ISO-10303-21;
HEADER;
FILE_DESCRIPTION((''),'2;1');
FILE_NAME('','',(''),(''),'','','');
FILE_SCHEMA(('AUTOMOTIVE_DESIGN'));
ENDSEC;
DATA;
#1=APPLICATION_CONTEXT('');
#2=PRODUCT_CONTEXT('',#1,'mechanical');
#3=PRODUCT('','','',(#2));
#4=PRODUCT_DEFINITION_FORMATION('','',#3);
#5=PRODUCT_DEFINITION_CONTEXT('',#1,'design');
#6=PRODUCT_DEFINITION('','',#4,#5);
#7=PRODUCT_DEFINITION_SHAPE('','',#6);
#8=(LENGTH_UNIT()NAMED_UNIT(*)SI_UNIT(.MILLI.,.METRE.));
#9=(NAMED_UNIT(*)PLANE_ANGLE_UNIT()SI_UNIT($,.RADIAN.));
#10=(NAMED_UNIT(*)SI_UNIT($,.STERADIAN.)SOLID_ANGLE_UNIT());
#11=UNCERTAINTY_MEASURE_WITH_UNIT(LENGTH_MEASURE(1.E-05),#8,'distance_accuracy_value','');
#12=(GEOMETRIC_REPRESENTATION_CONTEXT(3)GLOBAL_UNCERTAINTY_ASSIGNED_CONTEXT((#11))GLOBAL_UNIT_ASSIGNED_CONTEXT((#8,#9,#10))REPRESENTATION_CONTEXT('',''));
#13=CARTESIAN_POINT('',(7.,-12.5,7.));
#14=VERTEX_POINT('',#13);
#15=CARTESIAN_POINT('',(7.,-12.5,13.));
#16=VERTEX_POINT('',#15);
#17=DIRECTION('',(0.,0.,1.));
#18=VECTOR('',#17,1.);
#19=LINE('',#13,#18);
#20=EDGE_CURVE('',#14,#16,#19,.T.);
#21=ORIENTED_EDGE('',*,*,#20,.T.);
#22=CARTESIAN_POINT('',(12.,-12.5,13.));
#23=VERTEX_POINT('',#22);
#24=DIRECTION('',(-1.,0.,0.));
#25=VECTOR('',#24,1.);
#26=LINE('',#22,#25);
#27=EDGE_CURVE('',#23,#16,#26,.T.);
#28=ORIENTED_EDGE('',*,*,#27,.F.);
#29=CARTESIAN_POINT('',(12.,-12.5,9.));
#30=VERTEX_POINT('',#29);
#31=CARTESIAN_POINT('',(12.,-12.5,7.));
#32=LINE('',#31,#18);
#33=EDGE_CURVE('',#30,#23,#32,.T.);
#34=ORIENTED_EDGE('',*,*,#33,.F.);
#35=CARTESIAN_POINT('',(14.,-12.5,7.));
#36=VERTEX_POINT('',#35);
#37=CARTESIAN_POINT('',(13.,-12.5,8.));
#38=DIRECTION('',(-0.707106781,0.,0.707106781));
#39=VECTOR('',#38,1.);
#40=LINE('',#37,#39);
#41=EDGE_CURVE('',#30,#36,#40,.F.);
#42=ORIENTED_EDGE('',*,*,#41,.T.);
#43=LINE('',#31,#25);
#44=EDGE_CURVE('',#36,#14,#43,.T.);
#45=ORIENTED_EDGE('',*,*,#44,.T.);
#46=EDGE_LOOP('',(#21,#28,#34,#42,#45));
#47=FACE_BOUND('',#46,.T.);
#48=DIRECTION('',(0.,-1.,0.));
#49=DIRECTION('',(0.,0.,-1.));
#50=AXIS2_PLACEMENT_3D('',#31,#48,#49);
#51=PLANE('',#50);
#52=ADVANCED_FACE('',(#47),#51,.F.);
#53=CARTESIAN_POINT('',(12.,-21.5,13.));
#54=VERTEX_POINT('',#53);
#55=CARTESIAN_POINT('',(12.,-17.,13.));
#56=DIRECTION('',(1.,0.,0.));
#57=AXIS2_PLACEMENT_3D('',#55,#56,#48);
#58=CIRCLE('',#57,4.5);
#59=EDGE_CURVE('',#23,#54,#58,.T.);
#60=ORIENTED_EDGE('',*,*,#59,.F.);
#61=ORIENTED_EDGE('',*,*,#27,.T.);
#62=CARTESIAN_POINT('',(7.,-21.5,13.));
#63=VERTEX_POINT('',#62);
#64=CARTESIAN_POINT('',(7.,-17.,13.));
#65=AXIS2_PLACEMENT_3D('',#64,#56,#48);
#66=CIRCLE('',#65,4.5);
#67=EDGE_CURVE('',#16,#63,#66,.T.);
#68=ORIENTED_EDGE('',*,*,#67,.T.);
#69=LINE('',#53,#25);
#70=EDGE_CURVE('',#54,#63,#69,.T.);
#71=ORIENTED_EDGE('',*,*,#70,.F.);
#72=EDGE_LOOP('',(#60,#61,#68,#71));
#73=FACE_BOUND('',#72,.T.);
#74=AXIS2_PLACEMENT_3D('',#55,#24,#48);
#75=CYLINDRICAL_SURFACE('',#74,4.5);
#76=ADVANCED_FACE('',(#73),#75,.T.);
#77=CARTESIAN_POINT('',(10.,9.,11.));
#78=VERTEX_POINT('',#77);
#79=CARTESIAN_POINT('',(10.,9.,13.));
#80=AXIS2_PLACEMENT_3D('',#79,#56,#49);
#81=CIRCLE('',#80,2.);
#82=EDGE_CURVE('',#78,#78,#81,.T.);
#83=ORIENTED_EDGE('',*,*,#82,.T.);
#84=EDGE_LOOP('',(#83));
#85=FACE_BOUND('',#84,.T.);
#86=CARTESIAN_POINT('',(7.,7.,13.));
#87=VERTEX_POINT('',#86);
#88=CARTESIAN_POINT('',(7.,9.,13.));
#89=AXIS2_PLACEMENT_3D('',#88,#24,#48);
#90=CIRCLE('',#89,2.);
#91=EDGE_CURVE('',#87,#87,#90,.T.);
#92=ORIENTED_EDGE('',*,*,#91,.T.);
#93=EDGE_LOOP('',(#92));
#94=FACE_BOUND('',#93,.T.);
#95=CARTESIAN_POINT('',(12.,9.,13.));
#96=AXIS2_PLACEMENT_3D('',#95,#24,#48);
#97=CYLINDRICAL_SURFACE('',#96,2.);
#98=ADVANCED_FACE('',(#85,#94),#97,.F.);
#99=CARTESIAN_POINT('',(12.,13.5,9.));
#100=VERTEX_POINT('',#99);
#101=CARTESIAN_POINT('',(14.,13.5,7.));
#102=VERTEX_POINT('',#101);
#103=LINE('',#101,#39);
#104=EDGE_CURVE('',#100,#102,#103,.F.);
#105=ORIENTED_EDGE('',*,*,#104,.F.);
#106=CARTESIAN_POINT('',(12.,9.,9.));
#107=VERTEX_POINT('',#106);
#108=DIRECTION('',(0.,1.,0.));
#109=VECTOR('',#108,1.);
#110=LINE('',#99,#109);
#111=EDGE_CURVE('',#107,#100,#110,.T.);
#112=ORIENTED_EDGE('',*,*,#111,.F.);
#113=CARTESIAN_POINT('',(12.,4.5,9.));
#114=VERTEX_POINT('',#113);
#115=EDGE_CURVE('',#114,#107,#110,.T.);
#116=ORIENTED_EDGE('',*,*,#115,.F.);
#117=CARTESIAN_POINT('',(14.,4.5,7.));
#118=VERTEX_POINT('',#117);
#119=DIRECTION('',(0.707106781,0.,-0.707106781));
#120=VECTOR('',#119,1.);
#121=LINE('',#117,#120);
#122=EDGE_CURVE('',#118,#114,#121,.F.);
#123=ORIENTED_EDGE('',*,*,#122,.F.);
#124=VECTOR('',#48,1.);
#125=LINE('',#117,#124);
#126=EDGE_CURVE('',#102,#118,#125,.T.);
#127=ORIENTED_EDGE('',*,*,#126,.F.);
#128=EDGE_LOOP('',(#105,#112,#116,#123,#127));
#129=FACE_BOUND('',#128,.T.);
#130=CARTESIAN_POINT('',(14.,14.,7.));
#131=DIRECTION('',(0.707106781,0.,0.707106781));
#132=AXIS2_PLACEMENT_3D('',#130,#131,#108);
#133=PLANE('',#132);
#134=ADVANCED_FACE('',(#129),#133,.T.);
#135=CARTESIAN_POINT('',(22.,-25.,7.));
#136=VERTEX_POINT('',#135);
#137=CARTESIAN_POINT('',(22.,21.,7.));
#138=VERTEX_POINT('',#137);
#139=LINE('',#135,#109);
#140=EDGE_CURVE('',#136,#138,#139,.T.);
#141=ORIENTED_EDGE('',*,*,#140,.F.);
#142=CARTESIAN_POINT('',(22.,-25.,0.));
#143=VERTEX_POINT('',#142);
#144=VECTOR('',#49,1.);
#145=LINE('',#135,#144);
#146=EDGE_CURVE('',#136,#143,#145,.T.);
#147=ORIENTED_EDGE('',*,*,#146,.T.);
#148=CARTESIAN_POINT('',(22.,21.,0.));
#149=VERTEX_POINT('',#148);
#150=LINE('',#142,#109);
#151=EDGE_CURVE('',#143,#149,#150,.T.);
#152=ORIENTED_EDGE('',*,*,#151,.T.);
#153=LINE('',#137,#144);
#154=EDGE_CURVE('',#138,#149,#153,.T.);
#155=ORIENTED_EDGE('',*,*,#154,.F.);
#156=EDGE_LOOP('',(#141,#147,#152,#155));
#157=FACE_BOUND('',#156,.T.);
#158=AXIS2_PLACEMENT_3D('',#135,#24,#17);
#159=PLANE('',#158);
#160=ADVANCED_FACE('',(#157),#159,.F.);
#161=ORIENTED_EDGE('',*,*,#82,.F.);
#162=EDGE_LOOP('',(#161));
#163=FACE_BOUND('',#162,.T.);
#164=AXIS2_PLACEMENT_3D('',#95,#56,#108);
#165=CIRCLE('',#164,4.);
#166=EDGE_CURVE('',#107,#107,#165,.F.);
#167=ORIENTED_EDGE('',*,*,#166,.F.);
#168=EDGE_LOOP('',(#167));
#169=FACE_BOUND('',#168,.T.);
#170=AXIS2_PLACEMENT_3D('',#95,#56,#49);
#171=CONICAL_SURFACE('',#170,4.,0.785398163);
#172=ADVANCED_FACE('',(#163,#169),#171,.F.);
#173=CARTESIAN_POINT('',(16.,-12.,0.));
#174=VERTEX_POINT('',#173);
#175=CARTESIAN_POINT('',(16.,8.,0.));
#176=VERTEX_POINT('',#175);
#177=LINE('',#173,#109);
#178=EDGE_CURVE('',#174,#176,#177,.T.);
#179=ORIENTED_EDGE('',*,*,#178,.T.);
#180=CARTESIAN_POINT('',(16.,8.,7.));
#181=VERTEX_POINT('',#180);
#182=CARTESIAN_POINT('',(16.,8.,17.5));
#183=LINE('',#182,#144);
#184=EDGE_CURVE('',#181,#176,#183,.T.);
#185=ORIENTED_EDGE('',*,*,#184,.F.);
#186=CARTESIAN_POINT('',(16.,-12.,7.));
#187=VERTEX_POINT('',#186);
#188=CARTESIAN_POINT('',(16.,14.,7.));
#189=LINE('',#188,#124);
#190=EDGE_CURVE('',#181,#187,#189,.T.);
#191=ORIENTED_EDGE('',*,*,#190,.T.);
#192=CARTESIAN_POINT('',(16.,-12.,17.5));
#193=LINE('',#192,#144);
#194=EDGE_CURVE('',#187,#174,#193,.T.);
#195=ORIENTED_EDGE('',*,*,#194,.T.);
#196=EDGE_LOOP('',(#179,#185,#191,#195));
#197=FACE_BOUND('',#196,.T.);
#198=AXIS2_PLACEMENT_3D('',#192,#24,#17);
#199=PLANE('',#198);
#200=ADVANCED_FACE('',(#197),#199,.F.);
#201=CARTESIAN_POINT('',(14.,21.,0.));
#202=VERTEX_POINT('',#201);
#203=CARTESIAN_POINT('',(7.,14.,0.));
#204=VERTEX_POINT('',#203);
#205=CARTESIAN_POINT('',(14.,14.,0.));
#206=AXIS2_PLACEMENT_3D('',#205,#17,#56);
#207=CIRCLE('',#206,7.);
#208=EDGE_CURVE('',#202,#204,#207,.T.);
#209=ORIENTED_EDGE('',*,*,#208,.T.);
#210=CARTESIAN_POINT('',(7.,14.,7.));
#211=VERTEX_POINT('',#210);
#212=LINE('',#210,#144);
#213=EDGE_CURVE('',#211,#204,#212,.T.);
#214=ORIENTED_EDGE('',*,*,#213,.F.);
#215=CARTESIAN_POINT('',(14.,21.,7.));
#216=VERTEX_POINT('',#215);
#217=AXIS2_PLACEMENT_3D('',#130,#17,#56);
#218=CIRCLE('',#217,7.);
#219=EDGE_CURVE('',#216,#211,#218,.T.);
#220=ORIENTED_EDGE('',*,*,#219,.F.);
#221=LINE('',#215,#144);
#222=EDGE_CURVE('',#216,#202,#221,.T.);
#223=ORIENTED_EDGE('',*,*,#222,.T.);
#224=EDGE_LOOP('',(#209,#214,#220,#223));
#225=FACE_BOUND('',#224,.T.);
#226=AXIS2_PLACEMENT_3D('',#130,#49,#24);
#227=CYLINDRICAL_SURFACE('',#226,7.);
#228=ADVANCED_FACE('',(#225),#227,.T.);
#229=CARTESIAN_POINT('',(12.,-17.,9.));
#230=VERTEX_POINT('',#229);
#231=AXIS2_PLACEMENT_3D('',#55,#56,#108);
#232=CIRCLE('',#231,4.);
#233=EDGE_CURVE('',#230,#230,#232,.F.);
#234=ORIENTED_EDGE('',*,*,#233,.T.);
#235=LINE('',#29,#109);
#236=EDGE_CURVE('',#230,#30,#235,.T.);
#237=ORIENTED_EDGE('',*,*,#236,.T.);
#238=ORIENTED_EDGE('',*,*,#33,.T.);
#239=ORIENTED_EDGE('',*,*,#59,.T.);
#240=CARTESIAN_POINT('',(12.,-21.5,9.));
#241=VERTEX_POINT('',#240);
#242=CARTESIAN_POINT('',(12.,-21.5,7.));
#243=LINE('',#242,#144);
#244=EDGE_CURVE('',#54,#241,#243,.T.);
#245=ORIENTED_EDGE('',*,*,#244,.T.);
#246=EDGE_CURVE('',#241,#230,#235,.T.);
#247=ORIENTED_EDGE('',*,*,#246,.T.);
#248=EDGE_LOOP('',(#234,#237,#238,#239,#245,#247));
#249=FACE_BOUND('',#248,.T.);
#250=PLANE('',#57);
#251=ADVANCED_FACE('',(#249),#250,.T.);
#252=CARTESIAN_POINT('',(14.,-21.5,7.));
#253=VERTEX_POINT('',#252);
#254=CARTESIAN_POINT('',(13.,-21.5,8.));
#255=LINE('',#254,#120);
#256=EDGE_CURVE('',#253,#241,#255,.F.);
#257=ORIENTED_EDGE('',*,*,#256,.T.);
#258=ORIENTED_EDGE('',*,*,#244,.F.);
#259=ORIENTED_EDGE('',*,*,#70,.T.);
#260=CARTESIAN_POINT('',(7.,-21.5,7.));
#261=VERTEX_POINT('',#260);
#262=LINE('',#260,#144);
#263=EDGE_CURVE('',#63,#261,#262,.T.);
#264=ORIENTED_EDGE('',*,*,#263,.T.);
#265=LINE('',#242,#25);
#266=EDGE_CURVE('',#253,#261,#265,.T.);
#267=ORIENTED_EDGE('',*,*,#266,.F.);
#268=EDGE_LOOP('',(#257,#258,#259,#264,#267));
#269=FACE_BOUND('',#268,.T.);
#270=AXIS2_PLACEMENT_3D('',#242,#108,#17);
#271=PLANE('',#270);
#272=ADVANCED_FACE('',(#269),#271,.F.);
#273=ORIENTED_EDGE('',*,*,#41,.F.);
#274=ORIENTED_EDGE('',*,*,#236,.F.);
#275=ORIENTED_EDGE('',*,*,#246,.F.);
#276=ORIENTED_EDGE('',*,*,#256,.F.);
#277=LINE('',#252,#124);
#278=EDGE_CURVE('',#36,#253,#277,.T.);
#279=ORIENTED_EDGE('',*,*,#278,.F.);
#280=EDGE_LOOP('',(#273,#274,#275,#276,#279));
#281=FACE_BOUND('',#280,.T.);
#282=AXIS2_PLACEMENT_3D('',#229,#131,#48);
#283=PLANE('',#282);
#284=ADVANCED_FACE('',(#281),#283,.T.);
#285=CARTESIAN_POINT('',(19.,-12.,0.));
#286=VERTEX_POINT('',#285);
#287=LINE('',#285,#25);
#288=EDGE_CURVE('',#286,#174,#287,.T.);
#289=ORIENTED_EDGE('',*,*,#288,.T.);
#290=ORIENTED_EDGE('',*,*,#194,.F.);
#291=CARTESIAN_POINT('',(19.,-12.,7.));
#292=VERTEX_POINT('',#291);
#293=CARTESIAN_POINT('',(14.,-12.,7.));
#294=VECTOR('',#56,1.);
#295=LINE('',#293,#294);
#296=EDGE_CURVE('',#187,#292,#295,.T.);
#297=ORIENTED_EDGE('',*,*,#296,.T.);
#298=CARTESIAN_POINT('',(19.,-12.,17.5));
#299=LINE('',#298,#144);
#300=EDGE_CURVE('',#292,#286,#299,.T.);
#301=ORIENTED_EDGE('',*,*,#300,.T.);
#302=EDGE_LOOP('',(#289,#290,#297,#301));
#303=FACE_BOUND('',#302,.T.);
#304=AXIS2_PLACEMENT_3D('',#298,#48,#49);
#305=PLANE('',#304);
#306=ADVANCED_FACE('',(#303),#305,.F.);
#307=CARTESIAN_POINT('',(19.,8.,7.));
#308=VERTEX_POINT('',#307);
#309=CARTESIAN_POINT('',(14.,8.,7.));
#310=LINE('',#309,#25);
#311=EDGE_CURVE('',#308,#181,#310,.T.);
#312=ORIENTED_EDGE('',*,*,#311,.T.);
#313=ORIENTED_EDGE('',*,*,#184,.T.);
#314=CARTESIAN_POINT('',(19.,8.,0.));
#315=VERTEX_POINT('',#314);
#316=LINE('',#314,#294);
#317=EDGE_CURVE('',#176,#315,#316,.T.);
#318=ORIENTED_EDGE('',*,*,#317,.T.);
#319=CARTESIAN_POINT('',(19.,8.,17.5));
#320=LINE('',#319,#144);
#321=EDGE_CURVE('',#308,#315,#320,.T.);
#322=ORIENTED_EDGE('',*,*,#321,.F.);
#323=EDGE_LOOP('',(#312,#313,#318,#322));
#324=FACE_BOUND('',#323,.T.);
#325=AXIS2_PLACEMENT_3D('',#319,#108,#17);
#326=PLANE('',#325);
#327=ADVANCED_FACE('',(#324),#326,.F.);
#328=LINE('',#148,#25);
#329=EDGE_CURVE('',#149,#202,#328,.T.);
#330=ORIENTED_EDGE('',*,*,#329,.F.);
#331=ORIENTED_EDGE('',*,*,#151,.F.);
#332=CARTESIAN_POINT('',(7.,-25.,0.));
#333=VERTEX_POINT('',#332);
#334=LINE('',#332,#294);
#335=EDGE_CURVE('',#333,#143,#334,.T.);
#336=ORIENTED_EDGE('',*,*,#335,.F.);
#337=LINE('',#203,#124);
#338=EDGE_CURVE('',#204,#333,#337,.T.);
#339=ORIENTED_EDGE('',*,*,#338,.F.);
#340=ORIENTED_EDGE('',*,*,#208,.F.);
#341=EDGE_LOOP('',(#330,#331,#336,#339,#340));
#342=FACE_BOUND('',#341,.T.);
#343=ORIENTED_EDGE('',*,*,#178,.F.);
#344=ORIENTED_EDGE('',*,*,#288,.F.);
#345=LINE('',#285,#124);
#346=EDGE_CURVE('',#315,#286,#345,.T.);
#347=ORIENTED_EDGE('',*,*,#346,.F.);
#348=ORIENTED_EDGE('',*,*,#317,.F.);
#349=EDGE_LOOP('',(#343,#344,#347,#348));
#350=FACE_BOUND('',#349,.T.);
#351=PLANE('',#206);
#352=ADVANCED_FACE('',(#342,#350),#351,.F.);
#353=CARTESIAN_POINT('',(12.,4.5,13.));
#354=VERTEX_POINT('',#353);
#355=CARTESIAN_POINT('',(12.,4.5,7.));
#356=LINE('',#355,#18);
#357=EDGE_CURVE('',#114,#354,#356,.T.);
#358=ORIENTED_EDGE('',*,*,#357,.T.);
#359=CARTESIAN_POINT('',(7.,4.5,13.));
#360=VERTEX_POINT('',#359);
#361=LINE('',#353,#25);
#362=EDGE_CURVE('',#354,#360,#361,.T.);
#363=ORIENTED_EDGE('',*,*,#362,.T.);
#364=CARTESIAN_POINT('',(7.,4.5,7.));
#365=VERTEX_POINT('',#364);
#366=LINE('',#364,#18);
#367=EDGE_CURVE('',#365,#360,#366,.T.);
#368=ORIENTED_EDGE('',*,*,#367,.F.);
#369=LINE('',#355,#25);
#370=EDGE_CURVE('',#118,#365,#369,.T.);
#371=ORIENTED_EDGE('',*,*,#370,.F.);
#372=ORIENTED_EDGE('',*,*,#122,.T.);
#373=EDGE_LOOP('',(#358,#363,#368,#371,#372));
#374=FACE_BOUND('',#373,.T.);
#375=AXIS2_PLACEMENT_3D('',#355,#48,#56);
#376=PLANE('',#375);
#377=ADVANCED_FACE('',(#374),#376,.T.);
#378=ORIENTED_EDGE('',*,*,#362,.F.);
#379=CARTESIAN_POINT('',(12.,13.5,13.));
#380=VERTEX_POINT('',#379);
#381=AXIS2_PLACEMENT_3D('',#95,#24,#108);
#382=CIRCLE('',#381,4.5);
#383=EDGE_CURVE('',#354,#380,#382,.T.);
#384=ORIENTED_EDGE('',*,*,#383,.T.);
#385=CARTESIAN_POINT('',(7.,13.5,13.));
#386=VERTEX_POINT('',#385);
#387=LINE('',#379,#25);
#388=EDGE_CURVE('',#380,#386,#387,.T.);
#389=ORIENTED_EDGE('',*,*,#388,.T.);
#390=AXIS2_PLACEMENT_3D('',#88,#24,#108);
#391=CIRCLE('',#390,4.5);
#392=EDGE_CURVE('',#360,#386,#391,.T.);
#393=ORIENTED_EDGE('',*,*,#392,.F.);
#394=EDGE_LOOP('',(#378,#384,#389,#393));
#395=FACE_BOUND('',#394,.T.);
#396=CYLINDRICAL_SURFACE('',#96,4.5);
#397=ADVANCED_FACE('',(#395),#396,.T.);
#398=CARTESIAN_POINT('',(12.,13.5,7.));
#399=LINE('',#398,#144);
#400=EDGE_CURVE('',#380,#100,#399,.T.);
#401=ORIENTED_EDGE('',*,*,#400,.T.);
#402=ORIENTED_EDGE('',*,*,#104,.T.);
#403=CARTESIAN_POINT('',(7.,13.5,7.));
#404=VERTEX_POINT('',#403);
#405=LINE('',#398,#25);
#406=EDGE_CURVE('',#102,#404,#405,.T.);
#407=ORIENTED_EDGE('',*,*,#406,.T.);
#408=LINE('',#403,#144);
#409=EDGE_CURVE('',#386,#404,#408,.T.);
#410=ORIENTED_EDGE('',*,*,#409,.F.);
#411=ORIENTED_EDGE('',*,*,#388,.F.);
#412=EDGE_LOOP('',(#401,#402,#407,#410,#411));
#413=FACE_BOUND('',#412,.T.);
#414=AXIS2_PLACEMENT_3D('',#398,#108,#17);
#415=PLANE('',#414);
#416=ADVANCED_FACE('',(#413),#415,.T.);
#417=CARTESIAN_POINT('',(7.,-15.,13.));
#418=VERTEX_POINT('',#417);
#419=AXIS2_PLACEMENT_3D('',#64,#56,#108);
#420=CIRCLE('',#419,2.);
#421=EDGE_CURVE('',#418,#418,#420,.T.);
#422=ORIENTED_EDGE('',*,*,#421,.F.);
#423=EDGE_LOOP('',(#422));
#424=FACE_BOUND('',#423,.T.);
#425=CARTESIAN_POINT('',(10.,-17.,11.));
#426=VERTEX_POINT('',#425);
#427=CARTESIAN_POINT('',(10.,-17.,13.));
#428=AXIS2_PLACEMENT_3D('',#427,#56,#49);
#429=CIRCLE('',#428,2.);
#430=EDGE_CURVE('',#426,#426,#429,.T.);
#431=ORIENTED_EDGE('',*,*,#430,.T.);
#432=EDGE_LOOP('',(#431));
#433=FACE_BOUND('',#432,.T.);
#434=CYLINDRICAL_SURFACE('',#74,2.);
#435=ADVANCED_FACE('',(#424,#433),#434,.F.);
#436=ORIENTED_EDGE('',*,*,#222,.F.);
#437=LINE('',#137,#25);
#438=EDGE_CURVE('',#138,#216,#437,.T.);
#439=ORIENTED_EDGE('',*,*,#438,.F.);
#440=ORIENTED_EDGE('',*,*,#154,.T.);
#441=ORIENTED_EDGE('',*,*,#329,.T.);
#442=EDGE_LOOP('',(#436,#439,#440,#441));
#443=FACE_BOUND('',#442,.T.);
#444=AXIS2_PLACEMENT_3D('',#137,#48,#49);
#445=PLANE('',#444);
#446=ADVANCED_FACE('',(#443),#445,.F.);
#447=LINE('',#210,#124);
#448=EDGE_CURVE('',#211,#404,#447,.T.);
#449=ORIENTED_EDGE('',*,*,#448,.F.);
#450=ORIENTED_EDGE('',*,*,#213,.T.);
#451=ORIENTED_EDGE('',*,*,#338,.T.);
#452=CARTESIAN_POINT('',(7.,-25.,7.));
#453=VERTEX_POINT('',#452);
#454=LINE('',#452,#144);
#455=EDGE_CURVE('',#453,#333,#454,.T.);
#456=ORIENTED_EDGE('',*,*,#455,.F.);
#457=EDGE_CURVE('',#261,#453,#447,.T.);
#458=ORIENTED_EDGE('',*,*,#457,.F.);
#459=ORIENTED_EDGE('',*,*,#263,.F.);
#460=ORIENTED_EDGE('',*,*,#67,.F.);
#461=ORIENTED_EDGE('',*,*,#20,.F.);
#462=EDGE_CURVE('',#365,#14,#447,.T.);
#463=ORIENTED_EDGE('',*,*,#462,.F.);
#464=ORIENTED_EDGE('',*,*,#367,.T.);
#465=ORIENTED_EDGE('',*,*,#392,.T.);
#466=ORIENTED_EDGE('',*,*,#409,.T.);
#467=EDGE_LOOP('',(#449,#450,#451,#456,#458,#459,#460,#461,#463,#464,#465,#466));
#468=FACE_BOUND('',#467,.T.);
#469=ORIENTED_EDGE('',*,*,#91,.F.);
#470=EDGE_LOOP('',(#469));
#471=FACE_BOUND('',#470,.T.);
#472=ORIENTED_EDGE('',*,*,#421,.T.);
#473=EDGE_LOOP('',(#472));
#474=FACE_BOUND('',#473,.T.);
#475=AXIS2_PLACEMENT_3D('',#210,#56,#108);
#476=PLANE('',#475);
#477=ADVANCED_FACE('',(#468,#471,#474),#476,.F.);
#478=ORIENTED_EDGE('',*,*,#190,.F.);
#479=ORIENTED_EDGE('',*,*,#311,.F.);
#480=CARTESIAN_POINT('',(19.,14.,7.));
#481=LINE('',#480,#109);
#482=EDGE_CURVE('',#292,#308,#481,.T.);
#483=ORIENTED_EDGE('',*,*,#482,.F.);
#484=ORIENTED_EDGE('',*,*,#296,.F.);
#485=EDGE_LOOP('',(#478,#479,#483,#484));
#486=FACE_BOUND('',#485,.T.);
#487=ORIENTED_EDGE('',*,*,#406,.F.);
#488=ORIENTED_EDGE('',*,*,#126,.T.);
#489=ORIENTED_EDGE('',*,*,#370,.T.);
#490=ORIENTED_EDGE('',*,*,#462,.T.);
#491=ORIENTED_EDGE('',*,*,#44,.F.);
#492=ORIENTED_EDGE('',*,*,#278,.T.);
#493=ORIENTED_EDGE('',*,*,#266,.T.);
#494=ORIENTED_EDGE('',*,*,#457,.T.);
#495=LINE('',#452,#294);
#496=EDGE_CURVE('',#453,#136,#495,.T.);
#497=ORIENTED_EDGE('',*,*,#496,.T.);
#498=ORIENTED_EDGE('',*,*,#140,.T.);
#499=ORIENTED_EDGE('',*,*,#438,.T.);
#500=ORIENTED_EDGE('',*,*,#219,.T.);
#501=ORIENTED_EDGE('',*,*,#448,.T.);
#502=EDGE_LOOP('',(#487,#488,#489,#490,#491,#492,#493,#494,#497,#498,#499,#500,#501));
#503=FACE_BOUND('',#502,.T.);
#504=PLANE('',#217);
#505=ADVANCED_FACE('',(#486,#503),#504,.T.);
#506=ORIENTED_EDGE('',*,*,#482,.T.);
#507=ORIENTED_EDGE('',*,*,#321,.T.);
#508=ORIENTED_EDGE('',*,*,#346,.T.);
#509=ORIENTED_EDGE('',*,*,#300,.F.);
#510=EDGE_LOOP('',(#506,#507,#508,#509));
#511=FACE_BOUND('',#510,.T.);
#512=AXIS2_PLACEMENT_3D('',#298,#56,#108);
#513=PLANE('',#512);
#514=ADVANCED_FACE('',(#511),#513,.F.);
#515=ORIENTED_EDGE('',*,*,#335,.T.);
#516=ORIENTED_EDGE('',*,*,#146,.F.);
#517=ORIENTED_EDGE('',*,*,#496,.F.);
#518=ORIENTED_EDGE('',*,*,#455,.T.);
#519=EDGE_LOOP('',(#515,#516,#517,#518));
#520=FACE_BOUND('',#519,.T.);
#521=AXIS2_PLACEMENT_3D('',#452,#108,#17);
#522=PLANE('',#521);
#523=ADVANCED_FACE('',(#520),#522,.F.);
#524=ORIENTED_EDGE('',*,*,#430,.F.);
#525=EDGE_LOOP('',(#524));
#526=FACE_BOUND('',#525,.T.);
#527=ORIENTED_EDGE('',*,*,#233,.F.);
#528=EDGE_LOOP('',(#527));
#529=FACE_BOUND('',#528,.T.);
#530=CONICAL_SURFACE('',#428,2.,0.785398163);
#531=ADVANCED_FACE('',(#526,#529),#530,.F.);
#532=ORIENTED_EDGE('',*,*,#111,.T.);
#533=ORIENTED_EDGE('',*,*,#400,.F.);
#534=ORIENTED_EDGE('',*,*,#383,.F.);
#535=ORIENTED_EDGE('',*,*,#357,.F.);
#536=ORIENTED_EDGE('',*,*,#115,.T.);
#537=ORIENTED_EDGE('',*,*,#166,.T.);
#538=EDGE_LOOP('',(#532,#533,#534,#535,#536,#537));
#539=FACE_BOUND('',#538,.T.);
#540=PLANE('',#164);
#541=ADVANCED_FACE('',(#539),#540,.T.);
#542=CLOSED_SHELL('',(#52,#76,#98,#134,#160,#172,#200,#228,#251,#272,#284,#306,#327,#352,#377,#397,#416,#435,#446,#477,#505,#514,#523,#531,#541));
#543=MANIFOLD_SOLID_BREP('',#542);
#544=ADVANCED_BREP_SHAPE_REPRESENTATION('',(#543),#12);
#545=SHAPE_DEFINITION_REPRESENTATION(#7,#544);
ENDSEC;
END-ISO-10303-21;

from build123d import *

# Parameters (mm, degrees)
BOSS_EXTRUDE1_DEPTH = 7
SKETCH2_R           = 2
BOSS_EXTRUDE2_DEPTH = 5
CHAMFER1_SIZE       = 2
CHAMFER2_SIZE       = 2
SKETCH3_W           = 3
SKETCH3_H           = 20
CUT_EXTRUDE1_DEPTH  = 38.619808612


with BuildPart() as part:
    # Sketch1 → Boss-Extrude1 (new body)
    with BuildSketch(Plane.XY):
        with BuildLine():
            Line((22, 21), (14, 21))
            ThreePointArc((14, 21), (9.050252532, 18.949747468), (7, 14))
            Line((7, 14), (7, -25))
            Line((7, -25), (22, -25))
            Line((22, -25), (22, 21))
        make_face()
    extrude(amount=BOSS_EXTRUDE1_DEPTH)

    # Sketch2 → Boss-Extrude2 (add)
    with BuildSketch(Plane.ZY.offset(-7)):
        with BuildLine():
            Line((7, 13.5), (13, 13.5))
            ThreePointArc((13, 13.5), (17.5, 9), (13, 4.5))
            Line((13, 4.5), (7, 4.5))
            Line((7, 4.5), (7, 13.5))
        make_face()
        with Locations(Location((13, 9, 0), (0, 0, 270))):
            Circle(SKETCH2_R, mode=Mode.SUBTRACT)
    boss_extrude2 = extrude(amount=-BOSS_EXTRUDE2_DEPTH)

    # Mirror1: Boss-Extrude2 across plane
    add(boss_extrude2.mirror(Plane.ZX.offset(-4)))

    # Chamfer1
    chamfer1_edges = [part.edges().sort_by_distance(p)[0] for p in [
        (12, 11, 13),
        (12, -19, 13),
    ]]
    chamfer(chamfer1_edges, length=CHAMFER1_SIZE)

    # Chamfer2
    chamfer2_edges = [part.edges().sort_by_distance(p)[0] for p in [
        (12, 9, 7),
        (12, -17, 7),
    ]]
    chamfer(chamfer2_edges, length=CHAMFER2_SIZE - 0.0001)  # a hair under: the kernel refuses the full size

    # Sketch3 → Cut-Extrude1 (cut, through all)
    with BuildSketch(Plane(origin=(0, 0, 0), x_dir=(-1, 0, 0), z_dir=(0, 0, -1))):
        with Locations((-17.5, -2)):
            Rectangle(SKETCH3_W, SKETCH3_H)
    extrude(amount=-CUT_EXTRUDE1_DEPTH, mode=Mode.SUBTRACT)


solid = part.part
